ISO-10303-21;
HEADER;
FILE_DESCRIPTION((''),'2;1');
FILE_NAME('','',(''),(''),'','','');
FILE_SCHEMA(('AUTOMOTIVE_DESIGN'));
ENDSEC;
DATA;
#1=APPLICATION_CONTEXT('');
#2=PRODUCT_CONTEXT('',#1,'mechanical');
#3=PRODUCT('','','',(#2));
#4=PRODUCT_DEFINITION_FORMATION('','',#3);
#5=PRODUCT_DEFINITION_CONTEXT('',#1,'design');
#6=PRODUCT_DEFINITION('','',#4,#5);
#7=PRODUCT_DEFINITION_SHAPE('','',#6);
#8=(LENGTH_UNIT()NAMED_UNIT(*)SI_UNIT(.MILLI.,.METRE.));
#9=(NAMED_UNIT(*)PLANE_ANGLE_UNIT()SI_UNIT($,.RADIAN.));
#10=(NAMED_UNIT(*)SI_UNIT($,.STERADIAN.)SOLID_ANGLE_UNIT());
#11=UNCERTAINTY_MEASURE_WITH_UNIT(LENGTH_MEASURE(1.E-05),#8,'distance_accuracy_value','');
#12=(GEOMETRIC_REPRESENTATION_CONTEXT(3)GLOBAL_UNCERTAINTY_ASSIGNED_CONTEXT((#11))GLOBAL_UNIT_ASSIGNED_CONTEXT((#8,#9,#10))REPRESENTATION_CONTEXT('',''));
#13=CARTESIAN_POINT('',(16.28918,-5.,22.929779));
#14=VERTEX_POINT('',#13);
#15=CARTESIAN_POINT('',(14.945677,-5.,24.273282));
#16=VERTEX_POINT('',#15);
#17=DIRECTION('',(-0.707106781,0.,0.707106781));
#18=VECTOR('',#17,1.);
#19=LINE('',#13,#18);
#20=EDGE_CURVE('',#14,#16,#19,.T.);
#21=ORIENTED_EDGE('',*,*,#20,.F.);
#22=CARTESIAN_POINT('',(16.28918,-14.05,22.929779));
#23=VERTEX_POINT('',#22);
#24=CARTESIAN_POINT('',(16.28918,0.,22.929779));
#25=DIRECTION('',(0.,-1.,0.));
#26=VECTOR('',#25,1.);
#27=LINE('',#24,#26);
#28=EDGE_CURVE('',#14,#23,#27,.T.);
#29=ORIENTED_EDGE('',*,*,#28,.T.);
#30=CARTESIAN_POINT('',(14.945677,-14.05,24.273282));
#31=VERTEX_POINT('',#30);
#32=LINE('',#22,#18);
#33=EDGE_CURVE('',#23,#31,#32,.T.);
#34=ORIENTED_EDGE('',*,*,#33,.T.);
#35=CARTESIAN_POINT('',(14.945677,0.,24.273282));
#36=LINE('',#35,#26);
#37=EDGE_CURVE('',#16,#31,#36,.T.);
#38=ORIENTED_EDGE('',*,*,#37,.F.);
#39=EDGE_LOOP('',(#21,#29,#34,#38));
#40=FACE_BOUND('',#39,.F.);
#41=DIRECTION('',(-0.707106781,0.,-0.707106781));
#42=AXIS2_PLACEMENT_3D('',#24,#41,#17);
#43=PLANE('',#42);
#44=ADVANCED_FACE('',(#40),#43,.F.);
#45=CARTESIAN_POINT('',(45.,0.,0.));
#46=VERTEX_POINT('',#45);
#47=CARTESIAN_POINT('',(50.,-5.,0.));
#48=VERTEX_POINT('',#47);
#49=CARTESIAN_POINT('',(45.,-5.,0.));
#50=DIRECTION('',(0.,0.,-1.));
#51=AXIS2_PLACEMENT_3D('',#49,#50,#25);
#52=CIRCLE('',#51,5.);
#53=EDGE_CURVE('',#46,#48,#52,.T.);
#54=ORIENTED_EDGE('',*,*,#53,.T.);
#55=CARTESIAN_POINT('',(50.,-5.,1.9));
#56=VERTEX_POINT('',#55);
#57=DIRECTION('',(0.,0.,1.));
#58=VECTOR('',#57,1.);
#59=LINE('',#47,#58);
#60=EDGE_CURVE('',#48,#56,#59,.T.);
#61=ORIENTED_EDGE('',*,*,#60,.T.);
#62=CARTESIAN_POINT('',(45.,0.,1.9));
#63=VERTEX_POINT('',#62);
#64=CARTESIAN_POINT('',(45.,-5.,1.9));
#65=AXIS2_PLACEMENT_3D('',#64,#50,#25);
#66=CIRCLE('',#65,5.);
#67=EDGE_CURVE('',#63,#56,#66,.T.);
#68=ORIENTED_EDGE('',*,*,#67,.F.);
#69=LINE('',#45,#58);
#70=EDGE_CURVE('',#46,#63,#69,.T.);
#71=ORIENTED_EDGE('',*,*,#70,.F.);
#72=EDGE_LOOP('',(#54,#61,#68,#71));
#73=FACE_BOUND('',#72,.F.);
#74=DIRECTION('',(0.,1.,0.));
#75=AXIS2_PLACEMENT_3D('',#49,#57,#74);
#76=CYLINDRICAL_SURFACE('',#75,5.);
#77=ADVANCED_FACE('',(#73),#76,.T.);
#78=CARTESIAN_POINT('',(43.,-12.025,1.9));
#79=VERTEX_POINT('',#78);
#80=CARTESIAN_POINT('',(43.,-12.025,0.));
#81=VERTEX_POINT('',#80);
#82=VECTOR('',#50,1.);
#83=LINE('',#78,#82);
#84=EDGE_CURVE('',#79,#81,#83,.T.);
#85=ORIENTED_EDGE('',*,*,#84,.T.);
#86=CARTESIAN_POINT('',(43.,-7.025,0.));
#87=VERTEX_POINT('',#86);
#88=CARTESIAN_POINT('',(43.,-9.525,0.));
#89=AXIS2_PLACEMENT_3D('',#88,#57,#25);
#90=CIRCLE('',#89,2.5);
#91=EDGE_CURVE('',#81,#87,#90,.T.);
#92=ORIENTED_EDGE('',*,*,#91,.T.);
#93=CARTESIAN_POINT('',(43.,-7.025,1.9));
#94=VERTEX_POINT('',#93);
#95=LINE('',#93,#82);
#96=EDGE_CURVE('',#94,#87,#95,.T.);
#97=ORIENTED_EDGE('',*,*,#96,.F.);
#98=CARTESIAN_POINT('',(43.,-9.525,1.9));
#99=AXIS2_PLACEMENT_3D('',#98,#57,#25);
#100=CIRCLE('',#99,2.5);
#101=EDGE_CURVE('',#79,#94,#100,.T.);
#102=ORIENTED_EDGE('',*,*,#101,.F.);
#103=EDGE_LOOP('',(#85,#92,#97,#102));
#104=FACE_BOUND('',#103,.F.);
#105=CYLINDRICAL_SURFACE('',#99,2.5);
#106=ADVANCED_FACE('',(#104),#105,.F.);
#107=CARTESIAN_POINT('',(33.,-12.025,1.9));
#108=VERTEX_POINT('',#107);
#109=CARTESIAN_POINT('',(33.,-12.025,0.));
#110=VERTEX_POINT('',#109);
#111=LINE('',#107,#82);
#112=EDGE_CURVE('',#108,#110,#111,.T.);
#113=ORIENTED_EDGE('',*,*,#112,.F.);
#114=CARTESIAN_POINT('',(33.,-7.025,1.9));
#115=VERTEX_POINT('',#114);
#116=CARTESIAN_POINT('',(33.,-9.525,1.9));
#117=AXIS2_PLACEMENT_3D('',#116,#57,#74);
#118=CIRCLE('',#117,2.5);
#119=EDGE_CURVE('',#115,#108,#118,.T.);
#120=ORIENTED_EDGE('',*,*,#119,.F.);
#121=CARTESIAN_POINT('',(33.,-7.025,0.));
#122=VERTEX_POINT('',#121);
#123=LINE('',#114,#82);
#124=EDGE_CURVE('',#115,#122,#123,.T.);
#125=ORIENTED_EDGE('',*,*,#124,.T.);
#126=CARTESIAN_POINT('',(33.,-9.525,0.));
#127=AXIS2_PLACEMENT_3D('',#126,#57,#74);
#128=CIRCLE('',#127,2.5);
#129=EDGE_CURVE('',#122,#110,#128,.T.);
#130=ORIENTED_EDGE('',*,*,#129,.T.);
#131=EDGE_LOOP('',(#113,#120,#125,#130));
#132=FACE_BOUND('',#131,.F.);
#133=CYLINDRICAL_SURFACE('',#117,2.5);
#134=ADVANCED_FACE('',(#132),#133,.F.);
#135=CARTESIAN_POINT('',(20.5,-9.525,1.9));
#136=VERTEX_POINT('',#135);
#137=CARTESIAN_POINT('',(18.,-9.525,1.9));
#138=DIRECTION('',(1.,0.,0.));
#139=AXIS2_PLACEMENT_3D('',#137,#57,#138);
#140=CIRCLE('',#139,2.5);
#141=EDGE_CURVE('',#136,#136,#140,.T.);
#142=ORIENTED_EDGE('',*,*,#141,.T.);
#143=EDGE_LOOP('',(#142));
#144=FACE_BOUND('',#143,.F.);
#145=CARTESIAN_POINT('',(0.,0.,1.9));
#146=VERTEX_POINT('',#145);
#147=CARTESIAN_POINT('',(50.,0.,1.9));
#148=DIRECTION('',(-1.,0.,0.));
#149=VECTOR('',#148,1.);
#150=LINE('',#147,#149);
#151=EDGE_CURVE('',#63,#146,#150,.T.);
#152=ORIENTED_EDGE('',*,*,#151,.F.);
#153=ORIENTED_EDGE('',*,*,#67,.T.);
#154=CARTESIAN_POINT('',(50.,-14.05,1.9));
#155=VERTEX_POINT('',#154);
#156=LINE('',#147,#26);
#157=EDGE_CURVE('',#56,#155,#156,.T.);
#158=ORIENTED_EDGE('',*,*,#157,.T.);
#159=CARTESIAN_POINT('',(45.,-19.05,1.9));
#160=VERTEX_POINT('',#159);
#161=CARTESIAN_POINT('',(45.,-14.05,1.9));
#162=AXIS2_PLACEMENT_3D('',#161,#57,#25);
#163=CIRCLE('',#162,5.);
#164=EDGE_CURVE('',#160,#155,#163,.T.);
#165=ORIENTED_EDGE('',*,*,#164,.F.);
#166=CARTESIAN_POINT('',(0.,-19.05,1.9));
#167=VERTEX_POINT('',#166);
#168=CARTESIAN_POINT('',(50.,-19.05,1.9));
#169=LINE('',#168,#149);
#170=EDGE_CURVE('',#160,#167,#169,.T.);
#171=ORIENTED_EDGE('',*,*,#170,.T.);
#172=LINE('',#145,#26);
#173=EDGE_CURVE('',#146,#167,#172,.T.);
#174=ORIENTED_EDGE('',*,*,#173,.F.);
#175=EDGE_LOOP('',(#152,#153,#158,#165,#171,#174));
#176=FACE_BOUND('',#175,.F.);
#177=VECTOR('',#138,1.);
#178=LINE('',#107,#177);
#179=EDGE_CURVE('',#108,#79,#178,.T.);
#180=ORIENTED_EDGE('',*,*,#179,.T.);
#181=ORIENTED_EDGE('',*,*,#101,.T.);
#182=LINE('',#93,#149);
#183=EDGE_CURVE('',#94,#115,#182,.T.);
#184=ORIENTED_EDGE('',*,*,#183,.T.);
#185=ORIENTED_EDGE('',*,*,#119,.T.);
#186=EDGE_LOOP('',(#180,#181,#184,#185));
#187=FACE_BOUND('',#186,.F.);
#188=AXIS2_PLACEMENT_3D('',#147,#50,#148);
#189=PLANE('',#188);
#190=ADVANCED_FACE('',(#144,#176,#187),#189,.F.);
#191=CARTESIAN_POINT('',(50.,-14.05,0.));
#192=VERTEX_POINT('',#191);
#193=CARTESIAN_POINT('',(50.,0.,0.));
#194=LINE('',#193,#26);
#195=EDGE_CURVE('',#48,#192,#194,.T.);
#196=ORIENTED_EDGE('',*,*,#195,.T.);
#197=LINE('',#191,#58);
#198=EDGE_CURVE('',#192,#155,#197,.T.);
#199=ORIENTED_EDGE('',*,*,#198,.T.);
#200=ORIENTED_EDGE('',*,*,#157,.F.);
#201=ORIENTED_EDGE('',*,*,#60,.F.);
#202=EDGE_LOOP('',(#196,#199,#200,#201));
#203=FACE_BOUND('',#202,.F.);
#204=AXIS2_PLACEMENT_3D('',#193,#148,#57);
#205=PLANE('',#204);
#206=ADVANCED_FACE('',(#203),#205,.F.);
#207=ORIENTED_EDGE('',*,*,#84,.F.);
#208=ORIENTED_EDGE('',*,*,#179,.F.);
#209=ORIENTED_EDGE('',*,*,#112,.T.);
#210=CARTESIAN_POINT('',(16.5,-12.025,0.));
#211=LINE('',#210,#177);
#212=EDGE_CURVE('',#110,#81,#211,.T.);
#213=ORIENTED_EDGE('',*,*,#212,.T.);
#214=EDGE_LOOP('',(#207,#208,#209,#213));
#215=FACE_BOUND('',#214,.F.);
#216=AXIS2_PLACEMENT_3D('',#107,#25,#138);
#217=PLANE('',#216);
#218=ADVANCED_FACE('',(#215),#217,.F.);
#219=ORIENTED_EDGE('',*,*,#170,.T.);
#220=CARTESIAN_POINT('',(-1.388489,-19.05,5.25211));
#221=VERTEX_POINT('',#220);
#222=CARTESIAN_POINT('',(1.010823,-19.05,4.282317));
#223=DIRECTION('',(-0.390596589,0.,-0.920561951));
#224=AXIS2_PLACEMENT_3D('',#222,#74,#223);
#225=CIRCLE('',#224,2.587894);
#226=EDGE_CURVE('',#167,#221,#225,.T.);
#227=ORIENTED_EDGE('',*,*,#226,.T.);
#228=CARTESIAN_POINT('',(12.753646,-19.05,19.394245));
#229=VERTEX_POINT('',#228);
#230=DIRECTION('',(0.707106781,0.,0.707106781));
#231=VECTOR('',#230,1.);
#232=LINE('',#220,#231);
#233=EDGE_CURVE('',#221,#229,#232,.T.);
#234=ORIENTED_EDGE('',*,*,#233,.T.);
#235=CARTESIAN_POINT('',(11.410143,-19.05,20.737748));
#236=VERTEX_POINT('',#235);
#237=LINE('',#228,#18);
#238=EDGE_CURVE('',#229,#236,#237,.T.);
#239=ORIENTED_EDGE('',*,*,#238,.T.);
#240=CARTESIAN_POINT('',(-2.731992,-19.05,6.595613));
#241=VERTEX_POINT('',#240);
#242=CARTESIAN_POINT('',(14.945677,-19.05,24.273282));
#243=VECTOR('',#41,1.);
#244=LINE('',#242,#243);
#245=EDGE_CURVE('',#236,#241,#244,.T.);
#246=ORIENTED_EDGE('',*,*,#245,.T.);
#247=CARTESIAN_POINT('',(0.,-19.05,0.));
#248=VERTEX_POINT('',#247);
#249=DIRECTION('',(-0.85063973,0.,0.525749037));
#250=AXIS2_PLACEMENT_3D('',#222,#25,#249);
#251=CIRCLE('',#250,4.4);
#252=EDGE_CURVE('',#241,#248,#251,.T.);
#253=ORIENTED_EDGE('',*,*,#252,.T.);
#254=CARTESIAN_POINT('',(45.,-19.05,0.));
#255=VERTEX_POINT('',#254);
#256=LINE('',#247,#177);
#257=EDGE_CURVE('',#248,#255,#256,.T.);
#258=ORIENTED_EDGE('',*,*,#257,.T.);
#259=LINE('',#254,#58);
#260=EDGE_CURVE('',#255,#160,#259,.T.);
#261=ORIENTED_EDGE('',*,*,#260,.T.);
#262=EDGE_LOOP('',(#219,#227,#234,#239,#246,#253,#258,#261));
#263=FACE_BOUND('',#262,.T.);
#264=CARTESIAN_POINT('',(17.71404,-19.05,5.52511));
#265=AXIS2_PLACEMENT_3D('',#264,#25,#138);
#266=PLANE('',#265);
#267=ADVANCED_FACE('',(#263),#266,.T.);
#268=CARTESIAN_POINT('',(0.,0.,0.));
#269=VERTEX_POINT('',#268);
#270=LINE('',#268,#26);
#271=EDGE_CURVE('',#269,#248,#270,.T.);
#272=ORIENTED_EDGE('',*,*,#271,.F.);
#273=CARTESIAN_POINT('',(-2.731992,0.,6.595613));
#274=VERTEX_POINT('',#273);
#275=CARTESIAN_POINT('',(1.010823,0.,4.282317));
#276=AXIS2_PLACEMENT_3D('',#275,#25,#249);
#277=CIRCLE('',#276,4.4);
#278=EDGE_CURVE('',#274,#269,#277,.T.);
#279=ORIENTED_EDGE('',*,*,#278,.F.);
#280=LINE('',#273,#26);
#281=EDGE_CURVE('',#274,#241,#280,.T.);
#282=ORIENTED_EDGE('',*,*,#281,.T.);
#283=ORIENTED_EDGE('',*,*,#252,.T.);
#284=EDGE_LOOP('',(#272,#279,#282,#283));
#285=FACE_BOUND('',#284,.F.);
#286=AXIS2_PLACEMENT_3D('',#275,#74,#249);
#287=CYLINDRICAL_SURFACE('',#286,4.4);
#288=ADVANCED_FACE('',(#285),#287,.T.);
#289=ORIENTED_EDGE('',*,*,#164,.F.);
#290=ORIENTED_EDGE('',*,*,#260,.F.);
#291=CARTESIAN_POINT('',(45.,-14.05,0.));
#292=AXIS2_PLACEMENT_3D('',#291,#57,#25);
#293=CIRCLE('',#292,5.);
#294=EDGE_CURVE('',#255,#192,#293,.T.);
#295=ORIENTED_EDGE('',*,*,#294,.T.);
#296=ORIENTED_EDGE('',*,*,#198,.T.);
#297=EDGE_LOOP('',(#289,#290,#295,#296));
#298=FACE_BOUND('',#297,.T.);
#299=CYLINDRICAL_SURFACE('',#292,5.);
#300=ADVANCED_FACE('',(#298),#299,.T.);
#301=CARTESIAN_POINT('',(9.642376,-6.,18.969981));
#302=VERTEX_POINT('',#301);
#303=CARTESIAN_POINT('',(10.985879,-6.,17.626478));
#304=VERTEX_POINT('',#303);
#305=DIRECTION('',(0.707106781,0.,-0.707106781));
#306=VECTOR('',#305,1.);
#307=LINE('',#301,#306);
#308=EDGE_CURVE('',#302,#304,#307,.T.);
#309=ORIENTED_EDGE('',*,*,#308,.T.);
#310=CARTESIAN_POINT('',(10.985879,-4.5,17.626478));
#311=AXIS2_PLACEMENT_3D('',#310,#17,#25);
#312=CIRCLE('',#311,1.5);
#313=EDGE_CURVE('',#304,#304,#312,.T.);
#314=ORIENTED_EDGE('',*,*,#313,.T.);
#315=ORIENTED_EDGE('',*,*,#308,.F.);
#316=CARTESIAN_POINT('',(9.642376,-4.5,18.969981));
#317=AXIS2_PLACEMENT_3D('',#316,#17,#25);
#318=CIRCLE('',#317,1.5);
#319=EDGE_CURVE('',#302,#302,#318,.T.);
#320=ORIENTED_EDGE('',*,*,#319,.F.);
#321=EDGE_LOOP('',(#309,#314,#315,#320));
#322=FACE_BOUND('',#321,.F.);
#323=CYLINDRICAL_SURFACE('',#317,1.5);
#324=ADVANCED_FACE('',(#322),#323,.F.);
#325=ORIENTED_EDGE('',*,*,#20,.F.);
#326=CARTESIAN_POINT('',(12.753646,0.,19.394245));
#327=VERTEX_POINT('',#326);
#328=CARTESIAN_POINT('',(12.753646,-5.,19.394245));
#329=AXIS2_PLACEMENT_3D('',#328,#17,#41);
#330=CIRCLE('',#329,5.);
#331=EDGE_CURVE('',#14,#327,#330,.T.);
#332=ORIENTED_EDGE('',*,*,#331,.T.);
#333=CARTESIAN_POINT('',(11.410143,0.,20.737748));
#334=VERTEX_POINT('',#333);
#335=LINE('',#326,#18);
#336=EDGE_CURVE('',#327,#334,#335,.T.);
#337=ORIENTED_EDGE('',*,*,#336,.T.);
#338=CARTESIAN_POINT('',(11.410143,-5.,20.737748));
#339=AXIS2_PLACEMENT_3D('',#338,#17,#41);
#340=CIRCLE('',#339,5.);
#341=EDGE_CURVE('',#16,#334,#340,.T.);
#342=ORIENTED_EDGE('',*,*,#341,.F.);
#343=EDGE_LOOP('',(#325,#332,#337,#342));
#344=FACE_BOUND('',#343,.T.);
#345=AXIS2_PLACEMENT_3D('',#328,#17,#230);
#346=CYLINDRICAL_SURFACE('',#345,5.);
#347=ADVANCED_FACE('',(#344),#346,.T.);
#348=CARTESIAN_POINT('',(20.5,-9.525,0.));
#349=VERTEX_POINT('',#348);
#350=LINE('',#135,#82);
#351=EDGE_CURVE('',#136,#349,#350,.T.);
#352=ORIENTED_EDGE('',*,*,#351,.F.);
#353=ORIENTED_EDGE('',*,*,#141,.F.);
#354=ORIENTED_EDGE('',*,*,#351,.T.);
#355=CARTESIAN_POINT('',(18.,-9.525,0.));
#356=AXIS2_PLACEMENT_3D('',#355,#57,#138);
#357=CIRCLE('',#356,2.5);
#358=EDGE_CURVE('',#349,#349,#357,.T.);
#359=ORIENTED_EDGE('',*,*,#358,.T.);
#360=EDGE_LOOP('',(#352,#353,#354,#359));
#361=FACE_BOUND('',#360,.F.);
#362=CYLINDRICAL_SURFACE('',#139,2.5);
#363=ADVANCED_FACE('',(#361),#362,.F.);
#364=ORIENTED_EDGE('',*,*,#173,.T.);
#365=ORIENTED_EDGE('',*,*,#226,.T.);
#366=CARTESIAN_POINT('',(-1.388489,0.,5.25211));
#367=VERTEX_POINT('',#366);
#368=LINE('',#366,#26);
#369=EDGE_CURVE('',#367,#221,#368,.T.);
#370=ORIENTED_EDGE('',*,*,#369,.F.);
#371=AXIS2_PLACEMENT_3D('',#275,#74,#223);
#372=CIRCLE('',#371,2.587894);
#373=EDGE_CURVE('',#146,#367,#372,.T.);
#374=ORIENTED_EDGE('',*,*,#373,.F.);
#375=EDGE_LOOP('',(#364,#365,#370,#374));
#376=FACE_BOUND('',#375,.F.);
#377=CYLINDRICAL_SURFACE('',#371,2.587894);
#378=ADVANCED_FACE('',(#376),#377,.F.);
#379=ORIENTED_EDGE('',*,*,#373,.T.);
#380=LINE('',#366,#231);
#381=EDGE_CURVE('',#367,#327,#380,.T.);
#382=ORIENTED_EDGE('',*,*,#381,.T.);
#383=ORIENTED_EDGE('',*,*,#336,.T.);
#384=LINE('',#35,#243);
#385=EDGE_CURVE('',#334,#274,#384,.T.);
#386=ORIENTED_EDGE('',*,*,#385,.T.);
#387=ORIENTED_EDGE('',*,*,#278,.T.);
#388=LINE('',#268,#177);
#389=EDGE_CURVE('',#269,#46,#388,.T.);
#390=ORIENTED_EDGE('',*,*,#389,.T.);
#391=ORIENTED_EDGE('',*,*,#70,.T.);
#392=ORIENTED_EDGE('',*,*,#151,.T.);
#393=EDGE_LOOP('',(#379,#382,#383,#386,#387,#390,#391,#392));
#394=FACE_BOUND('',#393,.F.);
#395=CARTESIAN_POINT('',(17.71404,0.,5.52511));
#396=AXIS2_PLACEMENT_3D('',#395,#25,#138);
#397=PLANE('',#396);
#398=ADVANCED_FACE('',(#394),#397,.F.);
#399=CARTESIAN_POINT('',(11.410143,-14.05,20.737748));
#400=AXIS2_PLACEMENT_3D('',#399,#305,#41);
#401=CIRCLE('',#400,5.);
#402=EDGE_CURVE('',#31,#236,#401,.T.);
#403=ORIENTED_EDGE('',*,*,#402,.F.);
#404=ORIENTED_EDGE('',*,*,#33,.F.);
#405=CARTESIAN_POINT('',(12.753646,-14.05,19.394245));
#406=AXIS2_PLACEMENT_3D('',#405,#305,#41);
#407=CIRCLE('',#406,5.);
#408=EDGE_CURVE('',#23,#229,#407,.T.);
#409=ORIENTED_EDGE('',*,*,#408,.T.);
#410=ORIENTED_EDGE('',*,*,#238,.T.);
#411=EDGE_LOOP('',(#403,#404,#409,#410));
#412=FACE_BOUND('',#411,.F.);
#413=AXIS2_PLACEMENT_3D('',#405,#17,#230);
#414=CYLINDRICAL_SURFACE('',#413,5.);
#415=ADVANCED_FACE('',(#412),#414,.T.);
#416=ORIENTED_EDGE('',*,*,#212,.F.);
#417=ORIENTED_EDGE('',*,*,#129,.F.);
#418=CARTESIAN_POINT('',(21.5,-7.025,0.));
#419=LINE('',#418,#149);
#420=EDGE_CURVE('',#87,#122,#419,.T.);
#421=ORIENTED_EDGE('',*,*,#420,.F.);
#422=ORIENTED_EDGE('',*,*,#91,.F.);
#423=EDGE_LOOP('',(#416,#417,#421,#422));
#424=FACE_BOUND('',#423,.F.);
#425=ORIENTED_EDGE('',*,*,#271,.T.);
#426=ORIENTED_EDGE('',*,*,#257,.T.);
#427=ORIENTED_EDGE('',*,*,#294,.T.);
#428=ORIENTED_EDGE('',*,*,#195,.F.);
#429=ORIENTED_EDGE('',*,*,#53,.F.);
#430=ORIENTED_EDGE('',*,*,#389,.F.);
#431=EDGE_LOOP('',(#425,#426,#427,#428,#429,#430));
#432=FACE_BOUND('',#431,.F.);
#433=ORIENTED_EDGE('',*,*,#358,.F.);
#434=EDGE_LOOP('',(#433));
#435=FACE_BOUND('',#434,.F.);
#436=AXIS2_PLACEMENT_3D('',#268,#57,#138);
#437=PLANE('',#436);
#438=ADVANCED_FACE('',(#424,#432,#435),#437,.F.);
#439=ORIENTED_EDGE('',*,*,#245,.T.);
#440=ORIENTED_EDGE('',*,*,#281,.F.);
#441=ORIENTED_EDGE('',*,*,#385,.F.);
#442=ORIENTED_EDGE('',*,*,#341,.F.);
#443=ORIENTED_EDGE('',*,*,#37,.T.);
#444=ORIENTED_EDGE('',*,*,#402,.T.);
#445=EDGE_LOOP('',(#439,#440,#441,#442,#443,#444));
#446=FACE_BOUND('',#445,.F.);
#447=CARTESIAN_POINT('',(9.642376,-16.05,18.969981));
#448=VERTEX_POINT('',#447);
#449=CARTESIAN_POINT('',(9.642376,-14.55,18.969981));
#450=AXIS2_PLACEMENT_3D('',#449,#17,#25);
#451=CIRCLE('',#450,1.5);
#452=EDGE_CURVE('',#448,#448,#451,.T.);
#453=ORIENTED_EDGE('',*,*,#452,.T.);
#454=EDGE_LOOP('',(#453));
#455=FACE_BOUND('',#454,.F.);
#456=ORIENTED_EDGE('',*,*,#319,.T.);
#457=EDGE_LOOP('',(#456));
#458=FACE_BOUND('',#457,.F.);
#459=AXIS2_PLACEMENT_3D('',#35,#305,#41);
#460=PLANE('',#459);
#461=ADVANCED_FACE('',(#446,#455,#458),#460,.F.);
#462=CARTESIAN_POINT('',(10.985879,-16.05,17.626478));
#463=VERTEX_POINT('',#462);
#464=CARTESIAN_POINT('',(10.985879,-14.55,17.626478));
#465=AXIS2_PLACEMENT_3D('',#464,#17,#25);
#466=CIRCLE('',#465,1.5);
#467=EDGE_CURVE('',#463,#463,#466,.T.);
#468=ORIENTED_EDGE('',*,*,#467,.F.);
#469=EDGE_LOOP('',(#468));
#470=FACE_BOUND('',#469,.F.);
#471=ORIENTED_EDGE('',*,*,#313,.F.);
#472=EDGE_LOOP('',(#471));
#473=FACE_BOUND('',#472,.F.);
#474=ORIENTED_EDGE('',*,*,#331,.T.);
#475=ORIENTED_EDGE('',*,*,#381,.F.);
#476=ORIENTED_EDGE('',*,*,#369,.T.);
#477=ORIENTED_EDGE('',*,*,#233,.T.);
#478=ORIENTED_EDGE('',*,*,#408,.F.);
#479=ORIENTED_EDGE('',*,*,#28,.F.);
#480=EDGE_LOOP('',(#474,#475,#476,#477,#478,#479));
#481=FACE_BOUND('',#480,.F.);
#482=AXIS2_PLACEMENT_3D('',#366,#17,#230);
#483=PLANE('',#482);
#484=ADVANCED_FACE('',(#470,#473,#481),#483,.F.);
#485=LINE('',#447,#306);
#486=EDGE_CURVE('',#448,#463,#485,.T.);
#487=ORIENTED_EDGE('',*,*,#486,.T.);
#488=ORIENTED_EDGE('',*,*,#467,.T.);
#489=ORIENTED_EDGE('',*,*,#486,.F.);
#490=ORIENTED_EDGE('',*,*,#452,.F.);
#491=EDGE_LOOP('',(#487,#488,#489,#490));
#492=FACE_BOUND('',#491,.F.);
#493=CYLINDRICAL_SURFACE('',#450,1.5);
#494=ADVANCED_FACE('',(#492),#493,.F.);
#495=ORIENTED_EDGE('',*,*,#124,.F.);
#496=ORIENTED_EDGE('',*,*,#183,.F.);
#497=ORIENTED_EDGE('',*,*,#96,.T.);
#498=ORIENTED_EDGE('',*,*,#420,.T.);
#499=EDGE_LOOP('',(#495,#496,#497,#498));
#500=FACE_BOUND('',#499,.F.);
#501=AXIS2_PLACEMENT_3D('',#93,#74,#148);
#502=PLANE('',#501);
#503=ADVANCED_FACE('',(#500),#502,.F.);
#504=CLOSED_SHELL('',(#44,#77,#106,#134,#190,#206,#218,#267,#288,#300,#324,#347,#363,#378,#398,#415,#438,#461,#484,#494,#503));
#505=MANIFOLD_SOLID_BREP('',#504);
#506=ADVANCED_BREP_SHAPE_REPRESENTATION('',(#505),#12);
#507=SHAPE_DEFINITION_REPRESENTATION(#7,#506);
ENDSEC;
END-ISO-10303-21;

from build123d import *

# Parameters (mm, degrees)
F1_DEPTH  = 19.05
F2_R      = 5
F3_R      = 1.5
F4_DEPTH  = 10
F8_R      = 5
F9_R      = 2.5
F10_DEPTH = 25


with BuildPart() as f1:
    # F0 (on Front) → F1 (new body)
    with BuildSketch(Plane.XZ):
        with BuildLine():
            ThreePointArc((-2.7319921982, 6.5956126171), (-3.0542473294, 2.5985097523), (0, 0))
            Line((0, 0), (50, 0))
            Line((50, 0), (50, 1.9))
            Line((50, 1.9), (0, 1.9))
            ThreePointArc((0, 1.9), (-1.3800797918, 3.291972652), (-1.3884893139, 5.2521097328))
            Line((-1.3884893139, 5.2521097328), (16.2891802158, 22.9297792625))
            Line((16.2891802158, 22.9297792625), (14.9456773315, 24.2732821468))
            Line((14.9456773315, 24.2732821468), (-2.7319921982, 6.5956126171))
        make_face()
    extrude(amount=F1_DEPTH)

    # F2
    f2_edges = [f1.edges().sort_by_distance(p)[0] for p in [
        (15.617429, -19.05, 23.601531),
        (15.617429, 0, 23.601531),
    ]]
    fillet(f2_edges, radius=F2_R)

    # F3 (on face) → F4 (cut)
    with BuildSketch(Plane(origin=(-4.6638024076, 0, 4.6638024076), x_dir=(0, -1, 0), z_dir=(-0.7071067812, 0, 0.7071067812))):
        with Locations((14.55, 20.2319921982)):
            Circle(F3_R)
        with Locations((4.5, 20.2319921982)):
            Circle(F3_R)
    extrude(amount=-F4_DEPTH, mode=Mode.SUBTRACT)

    # F8
    f8_edges = [f1.edges().sort_by_distance(p)[0] for p in [
        (50, 0, 0.95),
        (50, -19.05, 0.95),
    ]]
    fillet(f8_edges, radius=F8_R)

    # F9 (on face) → F10 (cut)
    with BuildSketch(Plane.XY.offset(1.9)):
        with Locations((18, -9.525)):
            Circle(F9_R)
        with BuildLine():
            Line((33, -12.025), (43, -12.025))
            ThreePointArc((43, -12.025), (45.5, -9.525), (43, -7.025))
            Line((43, -7.025), (33, -7.025))
            ThreePointArc((33, -7.025), (30.5, -9.525), (33, -12.025))
        make_face()
    extrude(amount=-F10_DEPTH, mode=Mode.SUBTRACT)


solid = f1.part
